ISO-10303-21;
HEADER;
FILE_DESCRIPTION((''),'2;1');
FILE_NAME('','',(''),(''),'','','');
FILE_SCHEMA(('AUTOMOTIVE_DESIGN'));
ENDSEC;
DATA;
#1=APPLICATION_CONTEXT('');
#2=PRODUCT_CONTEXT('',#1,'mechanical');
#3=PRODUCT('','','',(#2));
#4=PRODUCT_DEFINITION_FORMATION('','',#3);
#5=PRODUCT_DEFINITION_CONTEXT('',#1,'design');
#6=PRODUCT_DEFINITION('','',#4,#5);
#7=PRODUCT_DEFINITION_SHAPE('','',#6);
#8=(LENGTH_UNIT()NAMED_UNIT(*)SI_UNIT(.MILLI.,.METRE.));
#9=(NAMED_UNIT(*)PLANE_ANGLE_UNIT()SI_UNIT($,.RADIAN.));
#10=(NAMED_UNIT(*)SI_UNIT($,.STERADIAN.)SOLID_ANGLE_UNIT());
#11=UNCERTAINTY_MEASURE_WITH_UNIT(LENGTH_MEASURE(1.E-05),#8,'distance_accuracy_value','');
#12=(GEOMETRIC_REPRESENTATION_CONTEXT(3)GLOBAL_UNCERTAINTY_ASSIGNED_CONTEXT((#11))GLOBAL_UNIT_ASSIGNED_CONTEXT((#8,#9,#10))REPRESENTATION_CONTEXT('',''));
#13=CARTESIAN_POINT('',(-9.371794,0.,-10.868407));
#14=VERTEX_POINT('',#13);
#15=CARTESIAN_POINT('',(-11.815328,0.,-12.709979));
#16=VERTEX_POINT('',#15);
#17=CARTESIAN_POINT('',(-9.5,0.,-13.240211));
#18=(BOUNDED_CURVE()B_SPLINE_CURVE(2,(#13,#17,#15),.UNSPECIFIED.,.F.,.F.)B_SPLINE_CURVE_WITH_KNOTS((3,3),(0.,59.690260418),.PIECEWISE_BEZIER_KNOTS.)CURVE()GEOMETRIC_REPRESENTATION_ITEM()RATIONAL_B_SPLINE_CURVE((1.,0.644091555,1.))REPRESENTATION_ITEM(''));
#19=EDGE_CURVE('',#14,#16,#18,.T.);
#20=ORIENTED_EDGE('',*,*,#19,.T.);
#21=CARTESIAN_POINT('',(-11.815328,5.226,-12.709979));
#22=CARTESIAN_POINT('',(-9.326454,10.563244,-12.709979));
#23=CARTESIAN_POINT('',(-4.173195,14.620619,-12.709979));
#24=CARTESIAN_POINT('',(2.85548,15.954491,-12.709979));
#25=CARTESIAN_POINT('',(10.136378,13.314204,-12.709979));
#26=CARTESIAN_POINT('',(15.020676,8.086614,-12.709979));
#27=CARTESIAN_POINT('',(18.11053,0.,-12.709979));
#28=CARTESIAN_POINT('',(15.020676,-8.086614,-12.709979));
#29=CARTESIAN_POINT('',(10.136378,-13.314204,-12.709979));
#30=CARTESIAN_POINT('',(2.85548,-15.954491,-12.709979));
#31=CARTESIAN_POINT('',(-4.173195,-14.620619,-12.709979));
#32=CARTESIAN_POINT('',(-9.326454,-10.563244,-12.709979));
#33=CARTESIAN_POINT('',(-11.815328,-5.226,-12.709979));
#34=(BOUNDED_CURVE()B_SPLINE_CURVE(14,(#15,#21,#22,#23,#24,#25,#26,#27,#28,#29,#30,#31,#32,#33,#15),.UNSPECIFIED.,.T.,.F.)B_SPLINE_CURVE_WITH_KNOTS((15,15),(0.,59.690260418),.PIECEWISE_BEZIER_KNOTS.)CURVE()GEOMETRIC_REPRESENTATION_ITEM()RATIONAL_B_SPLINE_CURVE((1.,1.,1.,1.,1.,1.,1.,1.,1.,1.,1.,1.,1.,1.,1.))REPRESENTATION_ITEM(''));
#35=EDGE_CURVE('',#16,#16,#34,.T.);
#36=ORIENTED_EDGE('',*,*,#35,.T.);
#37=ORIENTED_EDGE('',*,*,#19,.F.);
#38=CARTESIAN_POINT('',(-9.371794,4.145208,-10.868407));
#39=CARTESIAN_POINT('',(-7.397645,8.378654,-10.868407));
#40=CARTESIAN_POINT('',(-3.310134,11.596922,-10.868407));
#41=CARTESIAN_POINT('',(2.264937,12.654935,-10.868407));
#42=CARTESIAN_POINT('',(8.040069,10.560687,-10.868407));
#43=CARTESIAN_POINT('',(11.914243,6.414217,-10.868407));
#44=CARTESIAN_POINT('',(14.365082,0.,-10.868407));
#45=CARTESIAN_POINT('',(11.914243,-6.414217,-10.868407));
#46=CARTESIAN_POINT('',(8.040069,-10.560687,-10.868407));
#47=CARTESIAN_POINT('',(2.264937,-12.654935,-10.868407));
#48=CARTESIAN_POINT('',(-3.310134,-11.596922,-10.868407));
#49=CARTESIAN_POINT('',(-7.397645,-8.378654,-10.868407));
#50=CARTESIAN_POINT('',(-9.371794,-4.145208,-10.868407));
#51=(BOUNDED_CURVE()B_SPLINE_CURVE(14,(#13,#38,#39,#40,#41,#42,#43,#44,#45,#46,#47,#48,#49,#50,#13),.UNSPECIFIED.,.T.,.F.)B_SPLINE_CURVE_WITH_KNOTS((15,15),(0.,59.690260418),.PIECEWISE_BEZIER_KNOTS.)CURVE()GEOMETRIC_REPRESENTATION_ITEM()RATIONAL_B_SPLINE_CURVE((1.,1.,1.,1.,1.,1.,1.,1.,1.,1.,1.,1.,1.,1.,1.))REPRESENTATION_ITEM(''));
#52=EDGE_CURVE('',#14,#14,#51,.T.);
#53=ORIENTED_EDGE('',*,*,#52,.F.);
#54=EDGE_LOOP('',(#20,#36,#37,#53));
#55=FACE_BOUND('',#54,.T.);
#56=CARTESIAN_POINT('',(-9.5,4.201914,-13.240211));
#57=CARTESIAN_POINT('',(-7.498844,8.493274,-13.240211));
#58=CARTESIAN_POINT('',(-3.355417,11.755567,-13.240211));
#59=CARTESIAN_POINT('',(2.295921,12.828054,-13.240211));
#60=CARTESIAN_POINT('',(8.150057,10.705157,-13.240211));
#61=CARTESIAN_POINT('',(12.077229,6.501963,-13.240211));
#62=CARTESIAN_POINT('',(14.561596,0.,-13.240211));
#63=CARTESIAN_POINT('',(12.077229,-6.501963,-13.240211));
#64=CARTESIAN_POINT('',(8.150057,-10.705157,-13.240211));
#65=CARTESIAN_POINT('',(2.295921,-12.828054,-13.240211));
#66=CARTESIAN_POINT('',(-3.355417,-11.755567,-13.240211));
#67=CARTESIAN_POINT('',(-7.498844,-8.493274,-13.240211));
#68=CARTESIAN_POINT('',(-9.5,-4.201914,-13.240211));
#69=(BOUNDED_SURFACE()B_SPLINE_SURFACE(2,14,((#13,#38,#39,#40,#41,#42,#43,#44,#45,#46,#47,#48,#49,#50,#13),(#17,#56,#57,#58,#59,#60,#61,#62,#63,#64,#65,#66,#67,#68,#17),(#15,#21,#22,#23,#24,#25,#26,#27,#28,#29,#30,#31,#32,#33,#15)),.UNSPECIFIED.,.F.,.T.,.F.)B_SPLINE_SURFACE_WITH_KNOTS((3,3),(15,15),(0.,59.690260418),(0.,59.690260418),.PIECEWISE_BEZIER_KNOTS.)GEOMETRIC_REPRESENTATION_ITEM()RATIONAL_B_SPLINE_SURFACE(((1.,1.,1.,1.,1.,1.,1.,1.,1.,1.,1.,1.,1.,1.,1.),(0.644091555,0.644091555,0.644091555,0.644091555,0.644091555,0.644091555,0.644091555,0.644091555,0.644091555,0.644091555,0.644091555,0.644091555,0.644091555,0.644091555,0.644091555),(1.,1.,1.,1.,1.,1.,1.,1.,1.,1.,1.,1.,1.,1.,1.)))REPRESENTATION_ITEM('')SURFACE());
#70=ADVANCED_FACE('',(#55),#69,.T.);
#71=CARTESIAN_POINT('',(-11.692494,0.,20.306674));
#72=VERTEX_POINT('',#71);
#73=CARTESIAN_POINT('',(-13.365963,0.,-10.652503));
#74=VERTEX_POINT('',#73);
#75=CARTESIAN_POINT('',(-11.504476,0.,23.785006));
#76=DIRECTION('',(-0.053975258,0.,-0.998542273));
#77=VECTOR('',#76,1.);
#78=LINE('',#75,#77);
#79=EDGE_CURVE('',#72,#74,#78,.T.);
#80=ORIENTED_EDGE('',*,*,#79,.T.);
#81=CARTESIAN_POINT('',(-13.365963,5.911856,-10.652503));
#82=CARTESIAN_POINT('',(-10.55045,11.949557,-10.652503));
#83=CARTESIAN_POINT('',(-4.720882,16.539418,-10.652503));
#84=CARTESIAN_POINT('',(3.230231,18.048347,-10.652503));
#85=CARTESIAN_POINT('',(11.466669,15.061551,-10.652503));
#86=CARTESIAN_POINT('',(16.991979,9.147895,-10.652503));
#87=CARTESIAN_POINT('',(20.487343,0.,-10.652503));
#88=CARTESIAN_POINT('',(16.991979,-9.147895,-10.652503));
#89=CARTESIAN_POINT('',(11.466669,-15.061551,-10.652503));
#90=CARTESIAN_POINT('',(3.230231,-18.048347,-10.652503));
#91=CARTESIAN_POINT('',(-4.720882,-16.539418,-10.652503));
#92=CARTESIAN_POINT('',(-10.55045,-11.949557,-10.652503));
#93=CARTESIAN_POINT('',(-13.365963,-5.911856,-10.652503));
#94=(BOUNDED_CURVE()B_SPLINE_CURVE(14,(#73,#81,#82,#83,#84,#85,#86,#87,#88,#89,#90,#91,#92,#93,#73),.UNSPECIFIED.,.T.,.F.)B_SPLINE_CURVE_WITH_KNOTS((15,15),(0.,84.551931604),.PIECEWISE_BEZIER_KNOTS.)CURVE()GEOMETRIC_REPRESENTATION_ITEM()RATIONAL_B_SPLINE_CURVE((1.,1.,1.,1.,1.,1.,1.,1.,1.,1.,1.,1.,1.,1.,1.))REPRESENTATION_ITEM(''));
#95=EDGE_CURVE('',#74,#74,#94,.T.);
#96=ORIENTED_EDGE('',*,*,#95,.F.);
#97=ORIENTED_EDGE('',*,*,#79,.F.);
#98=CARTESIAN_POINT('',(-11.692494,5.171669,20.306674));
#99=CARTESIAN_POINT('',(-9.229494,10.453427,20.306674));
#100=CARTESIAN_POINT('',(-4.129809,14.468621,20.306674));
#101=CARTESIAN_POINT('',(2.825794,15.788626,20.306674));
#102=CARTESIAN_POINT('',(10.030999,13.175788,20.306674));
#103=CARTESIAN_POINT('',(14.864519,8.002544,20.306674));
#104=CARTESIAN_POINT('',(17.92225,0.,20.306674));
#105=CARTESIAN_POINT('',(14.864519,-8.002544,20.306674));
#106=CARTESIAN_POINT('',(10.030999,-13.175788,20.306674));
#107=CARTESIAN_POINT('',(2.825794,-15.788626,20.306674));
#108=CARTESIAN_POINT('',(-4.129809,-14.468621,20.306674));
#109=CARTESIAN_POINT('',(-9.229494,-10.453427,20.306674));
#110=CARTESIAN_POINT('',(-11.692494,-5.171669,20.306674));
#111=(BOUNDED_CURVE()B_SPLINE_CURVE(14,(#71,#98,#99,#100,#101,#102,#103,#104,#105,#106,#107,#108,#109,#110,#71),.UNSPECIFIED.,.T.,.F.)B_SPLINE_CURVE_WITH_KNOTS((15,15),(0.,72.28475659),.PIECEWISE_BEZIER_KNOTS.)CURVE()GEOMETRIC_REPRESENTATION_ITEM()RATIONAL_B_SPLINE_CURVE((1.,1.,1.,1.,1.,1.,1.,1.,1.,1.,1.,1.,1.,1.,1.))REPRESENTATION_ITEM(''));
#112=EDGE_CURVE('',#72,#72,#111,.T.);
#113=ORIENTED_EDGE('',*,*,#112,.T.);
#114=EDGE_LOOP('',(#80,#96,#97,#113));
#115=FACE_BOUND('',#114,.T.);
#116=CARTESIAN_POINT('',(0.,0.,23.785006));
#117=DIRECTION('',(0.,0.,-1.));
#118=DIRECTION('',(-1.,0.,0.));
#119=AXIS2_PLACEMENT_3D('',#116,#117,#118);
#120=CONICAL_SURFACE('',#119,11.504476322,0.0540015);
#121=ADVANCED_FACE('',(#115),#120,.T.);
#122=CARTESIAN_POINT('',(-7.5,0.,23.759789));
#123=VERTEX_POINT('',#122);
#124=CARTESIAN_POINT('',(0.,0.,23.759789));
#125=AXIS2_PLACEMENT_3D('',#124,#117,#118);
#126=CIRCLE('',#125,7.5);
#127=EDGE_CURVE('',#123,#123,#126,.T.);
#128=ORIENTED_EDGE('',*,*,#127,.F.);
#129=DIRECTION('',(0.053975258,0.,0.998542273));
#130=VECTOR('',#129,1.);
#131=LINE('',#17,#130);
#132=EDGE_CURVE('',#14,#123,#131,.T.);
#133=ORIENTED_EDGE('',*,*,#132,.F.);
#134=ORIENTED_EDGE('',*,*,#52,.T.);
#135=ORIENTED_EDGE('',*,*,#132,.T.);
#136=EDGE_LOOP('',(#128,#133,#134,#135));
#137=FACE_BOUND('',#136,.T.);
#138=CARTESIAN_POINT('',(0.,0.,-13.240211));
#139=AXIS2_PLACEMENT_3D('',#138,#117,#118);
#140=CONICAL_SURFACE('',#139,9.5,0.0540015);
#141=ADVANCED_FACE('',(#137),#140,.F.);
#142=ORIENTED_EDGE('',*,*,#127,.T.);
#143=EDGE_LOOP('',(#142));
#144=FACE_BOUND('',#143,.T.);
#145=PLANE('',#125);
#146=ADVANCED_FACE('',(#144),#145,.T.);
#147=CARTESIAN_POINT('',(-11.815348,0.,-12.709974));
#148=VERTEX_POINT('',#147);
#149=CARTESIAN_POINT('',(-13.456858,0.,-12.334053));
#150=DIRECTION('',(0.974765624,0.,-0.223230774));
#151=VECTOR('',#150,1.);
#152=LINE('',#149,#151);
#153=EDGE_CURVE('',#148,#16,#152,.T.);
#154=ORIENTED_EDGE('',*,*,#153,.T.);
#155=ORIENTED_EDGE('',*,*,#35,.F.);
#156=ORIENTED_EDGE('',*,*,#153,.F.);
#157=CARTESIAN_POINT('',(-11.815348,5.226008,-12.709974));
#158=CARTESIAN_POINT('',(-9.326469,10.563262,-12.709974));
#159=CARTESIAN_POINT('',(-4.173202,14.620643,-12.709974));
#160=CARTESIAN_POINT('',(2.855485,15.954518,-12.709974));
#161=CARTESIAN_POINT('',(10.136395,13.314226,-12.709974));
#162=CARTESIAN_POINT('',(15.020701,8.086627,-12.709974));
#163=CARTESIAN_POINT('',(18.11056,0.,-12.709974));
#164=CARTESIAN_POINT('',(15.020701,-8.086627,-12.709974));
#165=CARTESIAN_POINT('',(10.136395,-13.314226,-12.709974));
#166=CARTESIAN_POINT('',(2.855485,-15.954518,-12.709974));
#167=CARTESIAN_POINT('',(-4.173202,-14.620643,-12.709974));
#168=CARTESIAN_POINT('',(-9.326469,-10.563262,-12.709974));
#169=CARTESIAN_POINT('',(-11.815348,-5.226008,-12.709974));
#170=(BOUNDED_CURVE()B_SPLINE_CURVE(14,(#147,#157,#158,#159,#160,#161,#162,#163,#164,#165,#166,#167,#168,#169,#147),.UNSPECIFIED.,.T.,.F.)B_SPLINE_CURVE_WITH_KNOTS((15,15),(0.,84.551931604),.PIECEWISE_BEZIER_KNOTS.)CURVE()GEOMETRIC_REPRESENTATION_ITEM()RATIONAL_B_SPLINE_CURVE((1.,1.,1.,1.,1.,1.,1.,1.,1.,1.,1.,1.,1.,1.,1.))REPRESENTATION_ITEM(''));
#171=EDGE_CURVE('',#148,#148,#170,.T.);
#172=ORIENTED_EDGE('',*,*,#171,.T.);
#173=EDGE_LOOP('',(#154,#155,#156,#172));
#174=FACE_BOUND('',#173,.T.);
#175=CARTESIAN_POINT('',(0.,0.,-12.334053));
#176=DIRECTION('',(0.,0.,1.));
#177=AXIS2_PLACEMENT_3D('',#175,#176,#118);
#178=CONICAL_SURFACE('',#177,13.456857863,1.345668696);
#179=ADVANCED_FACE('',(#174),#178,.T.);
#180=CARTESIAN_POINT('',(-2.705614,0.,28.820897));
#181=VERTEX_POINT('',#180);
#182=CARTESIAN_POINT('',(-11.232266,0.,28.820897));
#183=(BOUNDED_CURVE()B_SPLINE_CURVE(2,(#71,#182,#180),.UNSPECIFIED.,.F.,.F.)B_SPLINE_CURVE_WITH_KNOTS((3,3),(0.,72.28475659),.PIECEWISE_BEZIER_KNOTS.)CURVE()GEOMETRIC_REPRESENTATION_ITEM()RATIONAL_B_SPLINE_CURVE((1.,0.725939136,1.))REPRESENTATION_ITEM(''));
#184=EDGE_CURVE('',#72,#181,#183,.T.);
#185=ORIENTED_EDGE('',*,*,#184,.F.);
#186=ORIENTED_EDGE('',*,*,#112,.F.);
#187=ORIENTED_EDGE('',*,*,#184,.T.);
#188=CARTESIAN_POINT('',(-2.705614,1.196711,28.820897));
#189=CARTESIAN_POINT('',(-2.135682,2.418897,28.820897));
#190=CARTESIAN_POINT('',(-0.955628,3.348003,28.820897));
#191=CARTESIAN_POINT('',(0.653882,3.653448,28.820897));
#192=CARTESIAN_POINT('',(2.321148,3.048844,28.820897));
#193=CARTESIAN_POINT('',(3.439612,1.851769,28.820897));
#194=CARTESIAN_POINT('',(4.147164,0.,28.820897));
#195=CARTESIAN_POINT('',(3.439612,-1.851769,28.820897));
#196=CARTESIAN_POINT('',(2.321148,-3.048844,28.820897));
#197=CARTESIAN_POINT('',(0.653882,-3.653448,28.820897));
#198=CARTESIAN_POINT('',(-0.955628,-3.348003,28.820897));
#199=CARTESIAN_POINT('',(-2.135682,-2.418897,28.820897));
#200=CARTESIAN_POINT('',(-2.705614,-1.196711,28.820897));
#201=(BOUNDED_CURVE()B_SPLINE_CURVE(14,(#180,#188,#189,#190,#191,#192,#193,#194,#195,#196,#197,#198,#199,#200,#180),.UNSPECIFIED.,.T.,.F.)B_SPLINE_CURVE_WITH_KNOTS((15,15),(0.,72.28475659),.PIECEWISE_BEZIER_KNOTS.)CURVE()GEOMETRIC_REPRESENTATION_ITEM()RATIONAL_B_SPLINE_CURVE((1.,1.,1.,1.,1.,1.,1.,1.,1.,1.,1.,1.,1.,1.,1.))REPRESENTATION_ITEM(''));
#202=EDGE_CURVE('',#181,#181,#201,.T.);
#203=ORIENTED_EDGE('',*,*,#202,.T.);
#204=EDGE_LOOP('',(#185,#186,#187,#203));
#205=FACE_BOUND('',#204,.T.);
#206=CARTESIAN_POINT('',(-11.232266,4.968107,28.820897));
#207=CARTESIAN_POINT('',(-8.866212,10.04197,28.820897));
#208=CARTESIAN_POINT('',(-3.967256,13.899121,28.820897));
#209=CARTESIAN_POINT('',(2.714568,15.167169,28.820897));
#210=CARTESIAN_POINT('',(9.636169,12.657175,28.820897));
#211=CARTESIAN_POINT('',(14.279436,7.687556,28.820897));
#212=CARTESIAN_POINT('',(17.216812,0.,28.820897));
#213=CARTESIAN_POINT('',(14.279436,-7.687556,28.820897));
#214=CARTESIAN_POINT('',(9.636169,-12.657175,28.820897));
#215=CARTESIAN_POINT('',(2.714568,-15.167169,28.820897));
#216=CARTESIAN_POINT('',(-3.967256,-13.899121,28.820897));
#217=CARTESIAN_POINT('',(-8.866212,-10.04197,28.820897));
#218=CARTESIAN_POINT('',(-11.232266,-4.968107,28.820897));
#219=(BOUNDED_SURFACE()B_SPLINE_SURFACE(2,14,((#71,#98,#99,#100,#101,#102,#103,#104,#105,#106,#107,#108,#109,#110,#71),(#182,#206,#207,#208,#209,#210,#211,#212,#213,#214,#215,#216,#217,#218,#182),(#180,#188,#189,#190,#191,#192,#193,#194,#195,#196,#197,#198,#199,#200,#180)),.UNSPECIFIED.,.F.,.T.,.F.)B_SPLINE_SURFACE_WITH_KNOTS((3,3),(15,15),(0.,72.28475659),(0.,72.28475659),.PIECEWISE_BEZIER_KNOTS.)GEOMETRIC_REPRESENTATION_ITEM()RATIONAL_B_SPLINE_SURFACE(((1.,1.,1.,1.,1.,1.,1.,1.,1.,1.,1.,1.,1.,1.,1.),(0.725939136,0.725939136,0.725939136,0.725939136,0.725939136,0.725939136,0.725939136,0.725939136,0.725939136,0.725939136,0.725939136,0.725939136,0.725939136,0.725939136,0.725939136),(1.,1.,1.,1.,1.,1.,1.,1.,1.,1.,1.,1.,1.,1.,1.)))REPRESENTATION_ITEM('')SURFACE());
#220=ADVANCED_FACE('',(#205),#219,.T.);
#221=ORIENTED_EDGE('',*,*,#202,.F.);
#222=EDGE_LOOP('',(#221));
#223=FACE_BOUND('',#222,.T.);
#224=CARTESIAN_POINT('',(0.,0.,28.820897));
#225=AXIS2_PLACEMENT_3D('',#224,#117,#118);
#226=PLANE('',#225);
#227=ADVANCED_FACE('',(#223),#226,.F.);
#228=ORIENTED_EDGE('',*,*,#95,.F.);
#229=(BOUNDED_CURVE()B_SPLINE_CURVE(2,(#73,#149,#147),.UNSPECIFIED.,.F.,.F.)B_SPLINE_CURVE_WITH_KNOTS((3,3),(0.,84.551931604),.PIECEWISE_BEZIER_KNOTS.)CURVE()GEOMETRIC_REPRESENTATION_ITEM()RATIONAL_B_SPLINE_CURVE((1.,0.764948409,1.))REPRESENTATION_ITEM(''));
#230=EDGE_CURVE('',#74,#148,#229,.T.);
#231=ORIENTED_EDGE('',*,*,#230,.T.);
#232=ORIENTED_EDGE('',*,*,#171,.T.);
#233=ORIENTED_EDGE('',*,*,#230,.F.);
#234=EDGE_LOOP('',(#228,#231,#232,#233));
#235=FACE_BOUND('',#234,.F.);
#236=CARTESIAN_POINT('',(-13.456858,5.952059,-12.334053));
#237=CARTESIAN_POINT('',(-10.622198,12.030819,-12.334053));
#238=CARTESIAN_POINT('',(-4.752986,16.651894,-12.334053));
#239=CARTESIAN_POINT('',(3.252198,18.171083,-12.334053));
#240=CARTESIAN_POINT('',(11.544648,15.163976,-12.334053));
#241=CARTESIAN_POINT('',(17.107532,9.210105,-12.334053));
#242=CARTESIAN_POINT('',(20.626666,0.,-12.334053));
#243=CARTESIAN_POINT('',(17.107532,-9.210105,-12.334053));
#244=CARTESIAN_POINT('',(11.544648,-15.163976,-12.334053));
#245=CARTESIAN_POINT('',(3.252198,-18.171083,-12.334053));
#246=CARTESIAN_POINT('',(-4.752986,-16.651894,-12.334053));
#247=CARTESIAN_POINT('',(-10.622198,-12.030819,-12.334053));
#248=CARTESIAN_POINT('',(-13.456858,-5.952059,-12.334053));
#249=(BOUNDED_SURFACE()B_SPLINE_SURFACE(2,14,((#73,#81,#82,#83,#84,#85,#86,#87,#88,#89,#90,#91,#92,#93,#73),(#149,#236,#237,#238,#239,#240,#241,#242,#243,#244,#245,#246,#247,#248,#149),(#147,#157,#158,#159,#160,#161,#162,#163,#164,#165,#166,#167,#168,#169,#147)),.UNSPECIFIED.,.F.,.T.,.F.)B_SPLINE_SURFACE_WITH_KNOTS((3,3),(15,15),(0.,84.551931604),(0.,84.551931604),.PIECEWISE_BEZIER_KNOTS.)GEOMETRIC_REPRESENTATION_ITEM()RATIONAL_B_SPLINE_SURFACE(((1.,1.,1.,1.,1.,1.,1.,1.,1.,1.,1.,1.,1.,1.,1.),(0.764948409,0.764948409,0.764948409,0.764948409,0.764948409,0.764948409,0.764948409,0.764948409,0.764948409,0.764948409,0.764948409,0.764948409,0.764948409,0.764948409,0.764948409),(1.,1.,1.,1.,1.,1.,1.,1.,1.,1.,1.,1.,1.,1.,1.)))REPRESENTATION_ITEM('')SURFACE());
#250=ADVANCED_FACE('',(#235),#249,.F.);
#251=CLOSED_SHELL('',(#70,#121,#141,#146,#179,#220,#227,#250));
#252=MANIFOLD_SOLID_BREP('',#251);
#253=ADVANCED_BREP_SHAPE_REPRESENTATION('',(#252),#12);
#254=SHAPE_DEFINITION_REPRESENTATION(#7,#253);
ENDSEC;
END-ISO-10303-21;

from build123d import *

# Parameters (mm, degrees)
F2_R = 1.99999
F3_R = 9


# Not quite as in the source:
# - a fillet or chamfer is up to 0.001 mm smaller than in the source, because OpenCascade refuses the exact size


with BuildPart() as f1:
    # F0 (on Front) → F1 (revolve)
    with BuildSketch(Plane.XZ):
        Polygon((-9.5, -13.2402114049), (-7.5, 23.7597885951), (0, 23.7597885951), (0, 28.8208965212), (-11.5044763215, 28.8208965212), (-11.5044763215, 23.7850059011), (-13.4568578627, -12.3340526108), align=None)
    revolve(axis=Axis((0, 0, 3.3093634993), (0, 0, -1)))

    # F2 (radius 2 in the source; OpenCascade refuses exactly that, so slightly less here)
    f2_edges = [f1.edges().sort_by_distance(p)[0] for p in [
        (9.5, 0, -13.240211),
        (13.456858, 0, -12.334053),
    ]]
    fillet(f2_edges, radius=F2_R)

    # F3
    f3_edges = [f1.edges().sort_by_distance(p)[0] for p in [
        (11.504476, 0, 28.820897),
    ]]
    fillet(f3_edges, radius=F3_R)


solid = f1.part
